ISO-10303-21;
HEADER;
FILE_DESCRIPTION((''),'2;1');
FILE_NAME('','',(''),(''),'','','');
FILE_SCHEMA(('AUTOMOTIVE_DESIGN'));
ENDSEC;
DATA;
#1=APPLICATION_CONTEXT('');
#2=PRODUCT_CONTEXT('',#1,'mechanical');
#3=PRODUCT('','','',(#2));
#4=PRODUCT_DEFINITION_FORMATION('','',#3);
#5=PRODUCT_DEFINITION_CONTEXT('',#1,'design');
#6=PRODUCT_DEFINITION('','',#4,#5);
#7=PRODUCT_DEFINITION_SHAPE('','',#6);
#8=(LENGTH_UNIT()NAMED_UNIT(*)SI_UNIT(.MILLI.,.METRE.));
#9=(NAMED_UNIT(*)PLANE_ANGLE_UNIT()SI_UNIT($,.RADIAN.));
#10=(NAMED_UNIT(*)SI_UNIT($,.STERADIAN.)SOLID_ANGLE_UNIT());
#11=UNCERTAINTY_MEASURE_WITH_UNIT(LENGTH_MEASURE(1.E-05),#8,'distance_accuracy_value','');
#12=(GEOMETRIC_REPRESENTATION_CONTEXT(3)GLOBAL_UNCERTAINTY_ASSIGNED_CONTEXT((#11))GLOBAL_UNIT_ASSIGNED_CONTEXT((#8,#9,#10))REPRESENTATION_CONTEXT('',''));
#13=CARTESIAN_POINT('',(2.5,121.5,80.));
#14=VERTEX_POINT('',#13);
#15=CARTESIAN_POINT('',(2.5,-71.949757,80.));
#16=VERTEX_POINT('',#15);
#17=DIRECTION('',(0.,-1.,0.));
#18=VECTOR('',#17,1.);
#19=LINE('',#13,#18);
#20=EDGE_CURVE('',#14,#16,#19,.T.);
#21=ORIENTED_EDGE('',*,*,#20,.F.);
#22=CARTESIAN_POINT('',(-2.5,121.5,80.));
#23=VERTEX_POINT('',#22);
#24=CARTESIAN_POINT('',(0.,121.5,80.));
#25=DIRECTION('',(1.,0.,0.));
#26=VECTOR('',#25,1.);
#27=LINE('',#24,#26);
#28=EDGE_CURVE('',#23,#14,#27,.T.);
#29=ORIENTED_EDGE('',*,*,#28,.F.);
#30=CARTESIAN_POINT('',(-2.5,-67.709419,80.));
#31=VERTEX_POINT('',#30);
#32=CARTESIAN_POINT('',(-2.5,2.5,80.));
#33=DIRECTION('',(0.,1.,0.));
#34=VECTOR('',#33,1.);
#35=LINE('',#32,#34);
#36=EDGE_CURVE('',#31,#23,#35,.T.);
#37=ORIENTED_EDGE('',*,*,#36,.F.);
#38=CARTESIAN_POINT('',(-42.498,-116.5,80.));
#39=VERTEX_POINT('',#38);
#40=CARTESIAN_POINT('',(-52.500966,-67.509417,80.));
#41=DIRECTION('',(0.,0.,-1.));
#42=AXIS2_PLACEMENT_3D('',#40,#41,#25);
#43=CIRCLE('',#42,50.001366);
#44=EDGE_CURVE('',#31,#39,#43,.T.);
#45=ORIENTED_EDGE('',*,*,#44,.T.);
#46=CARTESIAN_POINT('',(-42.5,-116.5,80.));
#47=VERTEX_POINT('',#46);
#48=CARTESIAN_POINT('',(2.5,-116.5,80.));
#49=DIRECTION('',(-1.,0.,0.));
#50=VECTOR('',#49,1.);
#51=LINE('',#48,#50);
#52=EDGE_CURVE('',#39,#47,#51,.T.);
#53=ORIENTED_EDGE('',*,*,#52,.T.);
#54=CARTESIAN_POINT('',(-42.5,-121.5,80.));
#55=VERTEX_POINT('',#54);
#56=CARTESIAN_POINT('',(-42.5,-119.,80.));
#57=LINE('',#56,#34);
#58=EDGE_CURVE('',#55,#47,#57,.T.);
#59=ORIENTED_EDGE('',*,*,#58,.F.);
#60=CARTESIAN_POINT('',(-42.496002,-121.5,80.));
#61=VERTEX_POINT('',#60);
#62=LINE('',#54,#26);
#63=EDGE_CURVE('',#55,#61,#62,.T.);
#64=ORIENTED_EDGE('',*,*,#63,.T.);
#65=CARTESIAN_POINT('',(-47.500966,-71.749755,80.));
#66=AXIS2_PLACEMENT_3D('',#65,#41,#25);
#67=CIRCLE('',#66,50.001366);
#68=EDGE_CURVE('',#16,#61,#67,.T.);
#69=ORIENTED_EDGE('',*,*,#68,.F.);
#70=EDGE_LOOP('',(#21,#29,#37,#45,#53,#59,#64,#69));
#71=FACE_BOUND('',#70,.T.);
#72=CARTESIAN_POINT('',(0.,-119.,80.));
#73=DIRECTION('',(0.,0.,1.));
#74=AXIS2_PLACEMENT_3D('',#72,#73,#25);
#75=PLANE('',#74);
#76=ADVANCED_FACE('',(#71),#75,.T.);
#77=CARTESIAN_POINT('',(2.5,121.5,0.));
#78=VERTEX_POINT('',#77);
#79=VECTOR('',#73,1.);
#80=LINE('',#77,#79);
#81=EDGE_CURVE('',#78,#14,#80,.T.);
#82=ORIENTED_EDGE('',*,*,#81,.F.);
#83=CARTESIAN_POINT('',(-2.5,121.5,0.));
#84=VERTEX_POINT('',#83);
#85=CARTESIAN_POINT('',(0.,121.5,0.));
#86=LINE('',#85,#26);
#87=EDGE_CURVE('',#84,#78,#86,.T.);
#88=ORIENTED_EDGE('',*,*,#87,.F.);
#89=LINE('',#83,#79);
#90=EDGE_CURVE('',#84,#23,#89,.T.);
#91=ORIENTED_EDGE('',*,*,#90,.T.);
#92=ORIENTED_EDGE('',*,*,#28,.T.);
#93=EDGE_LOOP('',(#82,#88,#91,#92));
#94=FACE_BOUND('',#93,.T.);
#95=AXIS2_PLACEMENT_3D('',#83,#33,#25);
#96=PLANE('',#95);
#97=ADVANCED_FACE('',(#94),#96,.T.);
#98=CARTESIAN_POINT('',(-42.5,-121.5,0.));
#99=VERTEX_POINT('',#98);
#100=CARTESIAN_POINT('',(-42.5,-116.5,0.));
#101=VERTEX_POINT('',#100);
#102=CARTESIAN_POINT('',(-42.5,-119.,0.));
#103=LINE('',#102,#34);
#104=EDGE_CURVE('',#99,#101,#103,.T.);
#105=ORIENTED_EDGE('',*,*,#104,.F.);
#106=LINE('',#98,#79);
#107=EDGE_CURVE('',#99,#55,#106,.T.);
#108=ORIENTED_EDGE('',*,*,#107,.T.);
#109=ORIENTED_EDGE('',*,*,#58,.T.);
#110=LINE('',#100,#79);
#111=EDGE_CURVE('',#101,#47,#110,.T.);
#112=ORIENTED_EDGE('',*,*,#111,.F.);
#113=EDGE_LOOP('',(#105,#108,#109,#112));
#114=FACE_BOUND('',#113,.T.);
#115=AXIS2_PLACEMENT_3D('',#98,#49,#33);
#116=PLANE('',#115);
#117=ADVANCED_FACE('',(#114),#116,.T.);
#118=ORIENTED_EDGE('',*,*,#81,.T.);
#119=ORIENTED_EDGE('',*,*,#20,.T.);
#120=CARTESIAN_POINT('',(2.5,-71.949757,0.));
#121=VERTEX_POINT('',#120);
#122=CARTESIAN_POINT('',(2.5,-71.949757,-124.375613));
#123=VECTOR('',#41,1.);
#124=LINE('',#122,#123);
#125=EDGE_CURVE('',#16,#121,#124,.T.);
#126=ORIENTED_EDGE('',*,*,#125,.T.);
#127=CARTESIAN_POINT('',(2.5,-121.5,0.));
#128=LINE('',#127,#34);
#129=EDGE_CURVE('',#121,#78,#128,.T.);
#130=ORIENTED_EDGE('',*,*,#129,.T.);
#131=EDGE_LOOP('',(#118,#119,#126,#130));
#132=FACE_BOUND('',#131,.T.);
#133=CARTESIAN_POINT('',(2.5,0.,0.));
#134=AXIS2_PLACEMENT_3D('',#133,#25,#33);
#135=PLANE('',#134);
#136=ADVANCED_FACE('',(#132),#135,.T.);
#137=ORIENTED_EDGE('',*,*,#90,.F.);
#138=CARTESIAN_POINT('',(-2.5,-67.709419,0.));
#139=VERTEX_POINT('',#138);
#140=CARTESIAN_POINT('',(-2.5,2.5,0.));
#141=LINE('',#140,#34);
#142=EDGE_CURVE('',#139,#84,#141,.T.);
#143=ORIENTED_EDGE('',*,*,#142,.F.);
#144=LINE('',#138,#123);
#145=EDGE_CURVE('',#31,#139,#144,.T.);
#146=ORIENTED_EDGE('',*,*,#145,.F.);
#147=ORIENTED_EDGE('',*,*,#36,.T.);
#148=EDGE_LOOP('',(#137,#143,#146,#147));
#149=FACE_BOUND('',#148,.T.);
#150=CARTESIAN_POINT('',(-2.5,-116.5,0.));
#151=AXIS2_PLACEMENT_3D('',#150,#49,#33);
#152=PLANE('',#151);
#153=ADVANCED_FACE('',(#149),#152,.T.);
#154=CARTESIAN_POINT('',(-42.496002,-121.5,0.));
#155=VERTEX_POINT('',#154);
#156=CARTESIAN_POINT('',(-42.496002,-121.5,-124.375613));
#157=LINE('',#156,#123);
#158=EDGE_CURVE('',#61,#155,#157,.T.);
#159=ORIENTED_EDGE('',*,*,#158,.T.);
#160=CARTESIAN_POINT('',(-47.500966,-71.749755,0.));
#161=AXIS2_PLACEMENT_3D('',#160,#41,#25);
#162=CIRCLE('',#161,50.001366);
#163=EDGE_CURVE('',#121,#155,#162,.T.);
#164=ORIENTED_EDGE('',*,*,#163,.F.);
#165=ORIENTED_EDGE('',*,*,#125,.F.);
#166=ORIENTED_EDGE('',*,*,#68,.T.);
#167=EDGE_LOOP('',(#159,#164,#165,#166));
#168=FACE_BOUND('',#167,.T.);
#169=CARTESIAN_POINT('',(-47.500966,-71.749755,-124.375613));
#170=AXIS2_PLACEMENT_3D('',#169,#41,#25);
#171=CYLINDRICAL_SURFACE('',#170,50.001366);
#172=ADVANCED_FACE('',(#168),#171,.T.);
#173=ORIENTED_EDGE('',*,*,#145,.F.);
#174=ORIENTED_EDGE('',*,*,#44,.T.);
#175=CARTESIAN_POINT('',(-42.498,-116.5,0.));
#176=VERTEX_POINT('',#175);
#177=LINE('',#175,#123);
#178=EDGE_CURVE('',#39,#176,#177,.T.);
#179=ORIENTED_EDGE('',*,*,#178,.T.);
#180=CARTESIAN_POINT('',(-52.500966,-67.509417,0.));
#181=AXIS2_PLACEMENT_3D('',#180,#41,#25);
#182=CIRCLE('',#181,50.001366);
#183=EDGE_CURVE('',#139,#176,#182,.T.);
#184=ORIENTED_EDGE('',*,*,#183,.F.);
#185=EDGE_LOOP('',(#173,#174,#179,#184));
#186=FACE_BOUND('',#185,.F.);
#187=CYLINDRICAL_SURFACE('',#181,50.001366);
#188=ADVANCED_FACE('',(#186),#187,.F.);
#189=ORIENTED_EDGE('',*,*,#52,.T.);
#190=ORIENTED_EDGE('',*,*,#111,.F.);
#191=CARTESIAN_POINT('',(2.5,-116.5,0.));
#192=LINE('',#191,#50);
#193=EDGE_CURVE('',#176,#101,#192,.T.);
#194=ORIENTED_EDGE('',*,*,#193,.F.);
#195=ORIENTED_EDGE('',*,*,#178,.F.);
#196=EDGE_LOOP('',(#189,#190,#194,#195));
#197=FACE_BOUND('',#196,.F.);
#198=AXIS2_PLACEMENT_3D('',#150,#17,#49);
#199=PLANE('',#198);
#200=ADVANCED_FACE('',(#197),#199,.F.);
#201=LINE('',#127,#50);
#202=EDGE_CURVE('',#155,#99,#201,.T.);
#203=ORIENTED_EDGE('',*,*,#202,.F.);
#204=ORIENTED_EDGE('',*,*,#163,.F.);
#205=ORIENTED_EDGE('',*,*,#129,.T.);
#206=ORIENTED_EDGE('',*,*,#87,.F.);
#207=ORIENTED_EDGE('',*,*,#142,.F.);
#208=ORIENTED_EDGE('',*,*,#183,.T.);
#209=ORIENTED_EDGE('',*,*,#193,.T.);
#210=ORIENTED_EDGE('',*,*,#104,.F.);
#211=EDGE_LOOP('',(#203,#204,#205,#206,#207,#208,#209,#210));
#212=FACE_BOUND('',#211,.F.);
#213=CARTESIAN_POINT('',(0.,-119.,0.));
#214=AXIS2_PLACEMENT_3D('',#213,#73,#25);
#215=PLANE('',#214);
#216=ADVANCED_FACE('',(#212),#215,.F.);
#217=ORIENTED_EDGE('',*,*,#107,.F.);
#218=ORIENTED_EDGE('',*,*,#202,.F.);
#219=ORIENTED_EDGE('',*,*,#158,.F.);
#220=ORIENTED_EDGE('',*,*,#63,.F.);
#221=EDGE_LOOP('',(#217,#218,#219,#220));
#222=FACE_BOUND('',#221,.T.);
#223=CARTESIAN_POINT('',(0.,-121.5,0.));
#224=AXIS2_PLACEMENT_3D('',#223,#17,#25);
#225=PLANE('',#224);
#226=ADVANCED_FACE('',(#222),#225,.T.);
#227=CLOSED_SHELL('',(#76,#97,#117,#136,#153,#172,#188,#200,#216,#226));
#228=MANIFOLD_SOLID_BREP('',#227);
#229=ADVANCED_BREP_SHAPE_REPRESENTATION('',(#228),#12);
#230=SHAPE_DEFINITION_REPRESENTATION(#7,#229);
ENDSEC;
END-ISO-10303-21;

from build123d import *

# Parameters (mm, degrees)
F0_W        = 5
F0_H        = 5
F0_W_2      = 40
F0_H_2      = 238
F1_DEPTH    = 80
F2_T4_DEPTH = 80
F2_T7_DEPTH = 328.751226723


# Not quite as in the source:
# - a fillet or chamfer that OpenCascade refuses, or shapes differently, is made with other operations: its cross-section is extruded or revolved along the edge and cut away or added


with BuildPart() as f1:
    # F0 (on Top) → F1 (new body)
    with BuildSketch(Plane.XY):
        with Locations((0, -119)):
            Rectangle(F0_W, F0_H)
        with Locations((-22.5, -119)):
            Rectangle(F0_W_2, F0_H)
        with Locations((0, 2.5)):
            Rectangle(F0_W, F0_H_2)
    extrude(amount=F1_DEPTH)

    # F2: fillet of radius 50 on 2 edges, made by hand


with BuildPart() as f2_tool2:
    # F2_s3 → F2_t4 (new body)
    with BuildSketch(Plane.XY):
        with BuildLine():
            ThreePointArc((-2.4996, -67.5094166718), (-13.7698250279, -99.1327516284), (-42.4999199938, -116.5003919171))
            Line((-42.4999199938, -116.5003919171), (-41.4998154247, -121.3994894416))
            ThreePointArc((-41.4998154247, -121.3994894416), (-22.4999599969, -121.5001365685), (-2.5, -121.5001365685))
            Line((-2.5, -121.5001365685), (2.5001365685, -116.5))
            ThreePointArc((2.5001365685, -116.5), (2.5001365685, -92.0047083359), (2.5005365685, -67.5094166718))
            Line((2.5005365685, -67.5094166718), (-2.4996, -67.5094166718))
        make_face()
    extrude(amount=F2_T4_DEPTH)

    split(bisect_by=Plane.YZ.offset(2.5), keep=Keep.BOTTOM)

    split(bisect_by=Plane.XZ.offset(121.5), keep=Keep.BOTTOM)


with BuildPart() as f1_1:
    add(f1.part)

    # F2_t1: union F2_tool2
    add(f2_tool2.part)

    # F2_s8 → F2_t7 (cut)
    with BuildSketch(Plane.XY.offset(-124.3756133615)):
        with BuildLine():
            ThreePointArc((2.5004, -71.749754657), (-10.4186674501, -105.2913665442), (-42.499959993, -121.5003979943))
            Line((-42.499959993, -121.5003979943), (-41.9998594238, -126.475462328))
            ThreePointArc((-41.9998594238, -126.475462328), (-19.9999799965, -126.5001365685), (2.5, -126.5001365685))
            Line((2.5, -126.5001365685), (7.5001365685, -121.5))
            ThreePointArc((7.5001365685, -121.5), (7.5001365685, -96.6248773285), (7.5005365685, -71.749754657))
            Line((7.5005365685, -71.749754657), (2.5004, -71.749754657))
        make_face()
    extrude(amount=F2_T7_DEPTH, mode=Mode.SUBTRACT)


solid = f1_1.part
